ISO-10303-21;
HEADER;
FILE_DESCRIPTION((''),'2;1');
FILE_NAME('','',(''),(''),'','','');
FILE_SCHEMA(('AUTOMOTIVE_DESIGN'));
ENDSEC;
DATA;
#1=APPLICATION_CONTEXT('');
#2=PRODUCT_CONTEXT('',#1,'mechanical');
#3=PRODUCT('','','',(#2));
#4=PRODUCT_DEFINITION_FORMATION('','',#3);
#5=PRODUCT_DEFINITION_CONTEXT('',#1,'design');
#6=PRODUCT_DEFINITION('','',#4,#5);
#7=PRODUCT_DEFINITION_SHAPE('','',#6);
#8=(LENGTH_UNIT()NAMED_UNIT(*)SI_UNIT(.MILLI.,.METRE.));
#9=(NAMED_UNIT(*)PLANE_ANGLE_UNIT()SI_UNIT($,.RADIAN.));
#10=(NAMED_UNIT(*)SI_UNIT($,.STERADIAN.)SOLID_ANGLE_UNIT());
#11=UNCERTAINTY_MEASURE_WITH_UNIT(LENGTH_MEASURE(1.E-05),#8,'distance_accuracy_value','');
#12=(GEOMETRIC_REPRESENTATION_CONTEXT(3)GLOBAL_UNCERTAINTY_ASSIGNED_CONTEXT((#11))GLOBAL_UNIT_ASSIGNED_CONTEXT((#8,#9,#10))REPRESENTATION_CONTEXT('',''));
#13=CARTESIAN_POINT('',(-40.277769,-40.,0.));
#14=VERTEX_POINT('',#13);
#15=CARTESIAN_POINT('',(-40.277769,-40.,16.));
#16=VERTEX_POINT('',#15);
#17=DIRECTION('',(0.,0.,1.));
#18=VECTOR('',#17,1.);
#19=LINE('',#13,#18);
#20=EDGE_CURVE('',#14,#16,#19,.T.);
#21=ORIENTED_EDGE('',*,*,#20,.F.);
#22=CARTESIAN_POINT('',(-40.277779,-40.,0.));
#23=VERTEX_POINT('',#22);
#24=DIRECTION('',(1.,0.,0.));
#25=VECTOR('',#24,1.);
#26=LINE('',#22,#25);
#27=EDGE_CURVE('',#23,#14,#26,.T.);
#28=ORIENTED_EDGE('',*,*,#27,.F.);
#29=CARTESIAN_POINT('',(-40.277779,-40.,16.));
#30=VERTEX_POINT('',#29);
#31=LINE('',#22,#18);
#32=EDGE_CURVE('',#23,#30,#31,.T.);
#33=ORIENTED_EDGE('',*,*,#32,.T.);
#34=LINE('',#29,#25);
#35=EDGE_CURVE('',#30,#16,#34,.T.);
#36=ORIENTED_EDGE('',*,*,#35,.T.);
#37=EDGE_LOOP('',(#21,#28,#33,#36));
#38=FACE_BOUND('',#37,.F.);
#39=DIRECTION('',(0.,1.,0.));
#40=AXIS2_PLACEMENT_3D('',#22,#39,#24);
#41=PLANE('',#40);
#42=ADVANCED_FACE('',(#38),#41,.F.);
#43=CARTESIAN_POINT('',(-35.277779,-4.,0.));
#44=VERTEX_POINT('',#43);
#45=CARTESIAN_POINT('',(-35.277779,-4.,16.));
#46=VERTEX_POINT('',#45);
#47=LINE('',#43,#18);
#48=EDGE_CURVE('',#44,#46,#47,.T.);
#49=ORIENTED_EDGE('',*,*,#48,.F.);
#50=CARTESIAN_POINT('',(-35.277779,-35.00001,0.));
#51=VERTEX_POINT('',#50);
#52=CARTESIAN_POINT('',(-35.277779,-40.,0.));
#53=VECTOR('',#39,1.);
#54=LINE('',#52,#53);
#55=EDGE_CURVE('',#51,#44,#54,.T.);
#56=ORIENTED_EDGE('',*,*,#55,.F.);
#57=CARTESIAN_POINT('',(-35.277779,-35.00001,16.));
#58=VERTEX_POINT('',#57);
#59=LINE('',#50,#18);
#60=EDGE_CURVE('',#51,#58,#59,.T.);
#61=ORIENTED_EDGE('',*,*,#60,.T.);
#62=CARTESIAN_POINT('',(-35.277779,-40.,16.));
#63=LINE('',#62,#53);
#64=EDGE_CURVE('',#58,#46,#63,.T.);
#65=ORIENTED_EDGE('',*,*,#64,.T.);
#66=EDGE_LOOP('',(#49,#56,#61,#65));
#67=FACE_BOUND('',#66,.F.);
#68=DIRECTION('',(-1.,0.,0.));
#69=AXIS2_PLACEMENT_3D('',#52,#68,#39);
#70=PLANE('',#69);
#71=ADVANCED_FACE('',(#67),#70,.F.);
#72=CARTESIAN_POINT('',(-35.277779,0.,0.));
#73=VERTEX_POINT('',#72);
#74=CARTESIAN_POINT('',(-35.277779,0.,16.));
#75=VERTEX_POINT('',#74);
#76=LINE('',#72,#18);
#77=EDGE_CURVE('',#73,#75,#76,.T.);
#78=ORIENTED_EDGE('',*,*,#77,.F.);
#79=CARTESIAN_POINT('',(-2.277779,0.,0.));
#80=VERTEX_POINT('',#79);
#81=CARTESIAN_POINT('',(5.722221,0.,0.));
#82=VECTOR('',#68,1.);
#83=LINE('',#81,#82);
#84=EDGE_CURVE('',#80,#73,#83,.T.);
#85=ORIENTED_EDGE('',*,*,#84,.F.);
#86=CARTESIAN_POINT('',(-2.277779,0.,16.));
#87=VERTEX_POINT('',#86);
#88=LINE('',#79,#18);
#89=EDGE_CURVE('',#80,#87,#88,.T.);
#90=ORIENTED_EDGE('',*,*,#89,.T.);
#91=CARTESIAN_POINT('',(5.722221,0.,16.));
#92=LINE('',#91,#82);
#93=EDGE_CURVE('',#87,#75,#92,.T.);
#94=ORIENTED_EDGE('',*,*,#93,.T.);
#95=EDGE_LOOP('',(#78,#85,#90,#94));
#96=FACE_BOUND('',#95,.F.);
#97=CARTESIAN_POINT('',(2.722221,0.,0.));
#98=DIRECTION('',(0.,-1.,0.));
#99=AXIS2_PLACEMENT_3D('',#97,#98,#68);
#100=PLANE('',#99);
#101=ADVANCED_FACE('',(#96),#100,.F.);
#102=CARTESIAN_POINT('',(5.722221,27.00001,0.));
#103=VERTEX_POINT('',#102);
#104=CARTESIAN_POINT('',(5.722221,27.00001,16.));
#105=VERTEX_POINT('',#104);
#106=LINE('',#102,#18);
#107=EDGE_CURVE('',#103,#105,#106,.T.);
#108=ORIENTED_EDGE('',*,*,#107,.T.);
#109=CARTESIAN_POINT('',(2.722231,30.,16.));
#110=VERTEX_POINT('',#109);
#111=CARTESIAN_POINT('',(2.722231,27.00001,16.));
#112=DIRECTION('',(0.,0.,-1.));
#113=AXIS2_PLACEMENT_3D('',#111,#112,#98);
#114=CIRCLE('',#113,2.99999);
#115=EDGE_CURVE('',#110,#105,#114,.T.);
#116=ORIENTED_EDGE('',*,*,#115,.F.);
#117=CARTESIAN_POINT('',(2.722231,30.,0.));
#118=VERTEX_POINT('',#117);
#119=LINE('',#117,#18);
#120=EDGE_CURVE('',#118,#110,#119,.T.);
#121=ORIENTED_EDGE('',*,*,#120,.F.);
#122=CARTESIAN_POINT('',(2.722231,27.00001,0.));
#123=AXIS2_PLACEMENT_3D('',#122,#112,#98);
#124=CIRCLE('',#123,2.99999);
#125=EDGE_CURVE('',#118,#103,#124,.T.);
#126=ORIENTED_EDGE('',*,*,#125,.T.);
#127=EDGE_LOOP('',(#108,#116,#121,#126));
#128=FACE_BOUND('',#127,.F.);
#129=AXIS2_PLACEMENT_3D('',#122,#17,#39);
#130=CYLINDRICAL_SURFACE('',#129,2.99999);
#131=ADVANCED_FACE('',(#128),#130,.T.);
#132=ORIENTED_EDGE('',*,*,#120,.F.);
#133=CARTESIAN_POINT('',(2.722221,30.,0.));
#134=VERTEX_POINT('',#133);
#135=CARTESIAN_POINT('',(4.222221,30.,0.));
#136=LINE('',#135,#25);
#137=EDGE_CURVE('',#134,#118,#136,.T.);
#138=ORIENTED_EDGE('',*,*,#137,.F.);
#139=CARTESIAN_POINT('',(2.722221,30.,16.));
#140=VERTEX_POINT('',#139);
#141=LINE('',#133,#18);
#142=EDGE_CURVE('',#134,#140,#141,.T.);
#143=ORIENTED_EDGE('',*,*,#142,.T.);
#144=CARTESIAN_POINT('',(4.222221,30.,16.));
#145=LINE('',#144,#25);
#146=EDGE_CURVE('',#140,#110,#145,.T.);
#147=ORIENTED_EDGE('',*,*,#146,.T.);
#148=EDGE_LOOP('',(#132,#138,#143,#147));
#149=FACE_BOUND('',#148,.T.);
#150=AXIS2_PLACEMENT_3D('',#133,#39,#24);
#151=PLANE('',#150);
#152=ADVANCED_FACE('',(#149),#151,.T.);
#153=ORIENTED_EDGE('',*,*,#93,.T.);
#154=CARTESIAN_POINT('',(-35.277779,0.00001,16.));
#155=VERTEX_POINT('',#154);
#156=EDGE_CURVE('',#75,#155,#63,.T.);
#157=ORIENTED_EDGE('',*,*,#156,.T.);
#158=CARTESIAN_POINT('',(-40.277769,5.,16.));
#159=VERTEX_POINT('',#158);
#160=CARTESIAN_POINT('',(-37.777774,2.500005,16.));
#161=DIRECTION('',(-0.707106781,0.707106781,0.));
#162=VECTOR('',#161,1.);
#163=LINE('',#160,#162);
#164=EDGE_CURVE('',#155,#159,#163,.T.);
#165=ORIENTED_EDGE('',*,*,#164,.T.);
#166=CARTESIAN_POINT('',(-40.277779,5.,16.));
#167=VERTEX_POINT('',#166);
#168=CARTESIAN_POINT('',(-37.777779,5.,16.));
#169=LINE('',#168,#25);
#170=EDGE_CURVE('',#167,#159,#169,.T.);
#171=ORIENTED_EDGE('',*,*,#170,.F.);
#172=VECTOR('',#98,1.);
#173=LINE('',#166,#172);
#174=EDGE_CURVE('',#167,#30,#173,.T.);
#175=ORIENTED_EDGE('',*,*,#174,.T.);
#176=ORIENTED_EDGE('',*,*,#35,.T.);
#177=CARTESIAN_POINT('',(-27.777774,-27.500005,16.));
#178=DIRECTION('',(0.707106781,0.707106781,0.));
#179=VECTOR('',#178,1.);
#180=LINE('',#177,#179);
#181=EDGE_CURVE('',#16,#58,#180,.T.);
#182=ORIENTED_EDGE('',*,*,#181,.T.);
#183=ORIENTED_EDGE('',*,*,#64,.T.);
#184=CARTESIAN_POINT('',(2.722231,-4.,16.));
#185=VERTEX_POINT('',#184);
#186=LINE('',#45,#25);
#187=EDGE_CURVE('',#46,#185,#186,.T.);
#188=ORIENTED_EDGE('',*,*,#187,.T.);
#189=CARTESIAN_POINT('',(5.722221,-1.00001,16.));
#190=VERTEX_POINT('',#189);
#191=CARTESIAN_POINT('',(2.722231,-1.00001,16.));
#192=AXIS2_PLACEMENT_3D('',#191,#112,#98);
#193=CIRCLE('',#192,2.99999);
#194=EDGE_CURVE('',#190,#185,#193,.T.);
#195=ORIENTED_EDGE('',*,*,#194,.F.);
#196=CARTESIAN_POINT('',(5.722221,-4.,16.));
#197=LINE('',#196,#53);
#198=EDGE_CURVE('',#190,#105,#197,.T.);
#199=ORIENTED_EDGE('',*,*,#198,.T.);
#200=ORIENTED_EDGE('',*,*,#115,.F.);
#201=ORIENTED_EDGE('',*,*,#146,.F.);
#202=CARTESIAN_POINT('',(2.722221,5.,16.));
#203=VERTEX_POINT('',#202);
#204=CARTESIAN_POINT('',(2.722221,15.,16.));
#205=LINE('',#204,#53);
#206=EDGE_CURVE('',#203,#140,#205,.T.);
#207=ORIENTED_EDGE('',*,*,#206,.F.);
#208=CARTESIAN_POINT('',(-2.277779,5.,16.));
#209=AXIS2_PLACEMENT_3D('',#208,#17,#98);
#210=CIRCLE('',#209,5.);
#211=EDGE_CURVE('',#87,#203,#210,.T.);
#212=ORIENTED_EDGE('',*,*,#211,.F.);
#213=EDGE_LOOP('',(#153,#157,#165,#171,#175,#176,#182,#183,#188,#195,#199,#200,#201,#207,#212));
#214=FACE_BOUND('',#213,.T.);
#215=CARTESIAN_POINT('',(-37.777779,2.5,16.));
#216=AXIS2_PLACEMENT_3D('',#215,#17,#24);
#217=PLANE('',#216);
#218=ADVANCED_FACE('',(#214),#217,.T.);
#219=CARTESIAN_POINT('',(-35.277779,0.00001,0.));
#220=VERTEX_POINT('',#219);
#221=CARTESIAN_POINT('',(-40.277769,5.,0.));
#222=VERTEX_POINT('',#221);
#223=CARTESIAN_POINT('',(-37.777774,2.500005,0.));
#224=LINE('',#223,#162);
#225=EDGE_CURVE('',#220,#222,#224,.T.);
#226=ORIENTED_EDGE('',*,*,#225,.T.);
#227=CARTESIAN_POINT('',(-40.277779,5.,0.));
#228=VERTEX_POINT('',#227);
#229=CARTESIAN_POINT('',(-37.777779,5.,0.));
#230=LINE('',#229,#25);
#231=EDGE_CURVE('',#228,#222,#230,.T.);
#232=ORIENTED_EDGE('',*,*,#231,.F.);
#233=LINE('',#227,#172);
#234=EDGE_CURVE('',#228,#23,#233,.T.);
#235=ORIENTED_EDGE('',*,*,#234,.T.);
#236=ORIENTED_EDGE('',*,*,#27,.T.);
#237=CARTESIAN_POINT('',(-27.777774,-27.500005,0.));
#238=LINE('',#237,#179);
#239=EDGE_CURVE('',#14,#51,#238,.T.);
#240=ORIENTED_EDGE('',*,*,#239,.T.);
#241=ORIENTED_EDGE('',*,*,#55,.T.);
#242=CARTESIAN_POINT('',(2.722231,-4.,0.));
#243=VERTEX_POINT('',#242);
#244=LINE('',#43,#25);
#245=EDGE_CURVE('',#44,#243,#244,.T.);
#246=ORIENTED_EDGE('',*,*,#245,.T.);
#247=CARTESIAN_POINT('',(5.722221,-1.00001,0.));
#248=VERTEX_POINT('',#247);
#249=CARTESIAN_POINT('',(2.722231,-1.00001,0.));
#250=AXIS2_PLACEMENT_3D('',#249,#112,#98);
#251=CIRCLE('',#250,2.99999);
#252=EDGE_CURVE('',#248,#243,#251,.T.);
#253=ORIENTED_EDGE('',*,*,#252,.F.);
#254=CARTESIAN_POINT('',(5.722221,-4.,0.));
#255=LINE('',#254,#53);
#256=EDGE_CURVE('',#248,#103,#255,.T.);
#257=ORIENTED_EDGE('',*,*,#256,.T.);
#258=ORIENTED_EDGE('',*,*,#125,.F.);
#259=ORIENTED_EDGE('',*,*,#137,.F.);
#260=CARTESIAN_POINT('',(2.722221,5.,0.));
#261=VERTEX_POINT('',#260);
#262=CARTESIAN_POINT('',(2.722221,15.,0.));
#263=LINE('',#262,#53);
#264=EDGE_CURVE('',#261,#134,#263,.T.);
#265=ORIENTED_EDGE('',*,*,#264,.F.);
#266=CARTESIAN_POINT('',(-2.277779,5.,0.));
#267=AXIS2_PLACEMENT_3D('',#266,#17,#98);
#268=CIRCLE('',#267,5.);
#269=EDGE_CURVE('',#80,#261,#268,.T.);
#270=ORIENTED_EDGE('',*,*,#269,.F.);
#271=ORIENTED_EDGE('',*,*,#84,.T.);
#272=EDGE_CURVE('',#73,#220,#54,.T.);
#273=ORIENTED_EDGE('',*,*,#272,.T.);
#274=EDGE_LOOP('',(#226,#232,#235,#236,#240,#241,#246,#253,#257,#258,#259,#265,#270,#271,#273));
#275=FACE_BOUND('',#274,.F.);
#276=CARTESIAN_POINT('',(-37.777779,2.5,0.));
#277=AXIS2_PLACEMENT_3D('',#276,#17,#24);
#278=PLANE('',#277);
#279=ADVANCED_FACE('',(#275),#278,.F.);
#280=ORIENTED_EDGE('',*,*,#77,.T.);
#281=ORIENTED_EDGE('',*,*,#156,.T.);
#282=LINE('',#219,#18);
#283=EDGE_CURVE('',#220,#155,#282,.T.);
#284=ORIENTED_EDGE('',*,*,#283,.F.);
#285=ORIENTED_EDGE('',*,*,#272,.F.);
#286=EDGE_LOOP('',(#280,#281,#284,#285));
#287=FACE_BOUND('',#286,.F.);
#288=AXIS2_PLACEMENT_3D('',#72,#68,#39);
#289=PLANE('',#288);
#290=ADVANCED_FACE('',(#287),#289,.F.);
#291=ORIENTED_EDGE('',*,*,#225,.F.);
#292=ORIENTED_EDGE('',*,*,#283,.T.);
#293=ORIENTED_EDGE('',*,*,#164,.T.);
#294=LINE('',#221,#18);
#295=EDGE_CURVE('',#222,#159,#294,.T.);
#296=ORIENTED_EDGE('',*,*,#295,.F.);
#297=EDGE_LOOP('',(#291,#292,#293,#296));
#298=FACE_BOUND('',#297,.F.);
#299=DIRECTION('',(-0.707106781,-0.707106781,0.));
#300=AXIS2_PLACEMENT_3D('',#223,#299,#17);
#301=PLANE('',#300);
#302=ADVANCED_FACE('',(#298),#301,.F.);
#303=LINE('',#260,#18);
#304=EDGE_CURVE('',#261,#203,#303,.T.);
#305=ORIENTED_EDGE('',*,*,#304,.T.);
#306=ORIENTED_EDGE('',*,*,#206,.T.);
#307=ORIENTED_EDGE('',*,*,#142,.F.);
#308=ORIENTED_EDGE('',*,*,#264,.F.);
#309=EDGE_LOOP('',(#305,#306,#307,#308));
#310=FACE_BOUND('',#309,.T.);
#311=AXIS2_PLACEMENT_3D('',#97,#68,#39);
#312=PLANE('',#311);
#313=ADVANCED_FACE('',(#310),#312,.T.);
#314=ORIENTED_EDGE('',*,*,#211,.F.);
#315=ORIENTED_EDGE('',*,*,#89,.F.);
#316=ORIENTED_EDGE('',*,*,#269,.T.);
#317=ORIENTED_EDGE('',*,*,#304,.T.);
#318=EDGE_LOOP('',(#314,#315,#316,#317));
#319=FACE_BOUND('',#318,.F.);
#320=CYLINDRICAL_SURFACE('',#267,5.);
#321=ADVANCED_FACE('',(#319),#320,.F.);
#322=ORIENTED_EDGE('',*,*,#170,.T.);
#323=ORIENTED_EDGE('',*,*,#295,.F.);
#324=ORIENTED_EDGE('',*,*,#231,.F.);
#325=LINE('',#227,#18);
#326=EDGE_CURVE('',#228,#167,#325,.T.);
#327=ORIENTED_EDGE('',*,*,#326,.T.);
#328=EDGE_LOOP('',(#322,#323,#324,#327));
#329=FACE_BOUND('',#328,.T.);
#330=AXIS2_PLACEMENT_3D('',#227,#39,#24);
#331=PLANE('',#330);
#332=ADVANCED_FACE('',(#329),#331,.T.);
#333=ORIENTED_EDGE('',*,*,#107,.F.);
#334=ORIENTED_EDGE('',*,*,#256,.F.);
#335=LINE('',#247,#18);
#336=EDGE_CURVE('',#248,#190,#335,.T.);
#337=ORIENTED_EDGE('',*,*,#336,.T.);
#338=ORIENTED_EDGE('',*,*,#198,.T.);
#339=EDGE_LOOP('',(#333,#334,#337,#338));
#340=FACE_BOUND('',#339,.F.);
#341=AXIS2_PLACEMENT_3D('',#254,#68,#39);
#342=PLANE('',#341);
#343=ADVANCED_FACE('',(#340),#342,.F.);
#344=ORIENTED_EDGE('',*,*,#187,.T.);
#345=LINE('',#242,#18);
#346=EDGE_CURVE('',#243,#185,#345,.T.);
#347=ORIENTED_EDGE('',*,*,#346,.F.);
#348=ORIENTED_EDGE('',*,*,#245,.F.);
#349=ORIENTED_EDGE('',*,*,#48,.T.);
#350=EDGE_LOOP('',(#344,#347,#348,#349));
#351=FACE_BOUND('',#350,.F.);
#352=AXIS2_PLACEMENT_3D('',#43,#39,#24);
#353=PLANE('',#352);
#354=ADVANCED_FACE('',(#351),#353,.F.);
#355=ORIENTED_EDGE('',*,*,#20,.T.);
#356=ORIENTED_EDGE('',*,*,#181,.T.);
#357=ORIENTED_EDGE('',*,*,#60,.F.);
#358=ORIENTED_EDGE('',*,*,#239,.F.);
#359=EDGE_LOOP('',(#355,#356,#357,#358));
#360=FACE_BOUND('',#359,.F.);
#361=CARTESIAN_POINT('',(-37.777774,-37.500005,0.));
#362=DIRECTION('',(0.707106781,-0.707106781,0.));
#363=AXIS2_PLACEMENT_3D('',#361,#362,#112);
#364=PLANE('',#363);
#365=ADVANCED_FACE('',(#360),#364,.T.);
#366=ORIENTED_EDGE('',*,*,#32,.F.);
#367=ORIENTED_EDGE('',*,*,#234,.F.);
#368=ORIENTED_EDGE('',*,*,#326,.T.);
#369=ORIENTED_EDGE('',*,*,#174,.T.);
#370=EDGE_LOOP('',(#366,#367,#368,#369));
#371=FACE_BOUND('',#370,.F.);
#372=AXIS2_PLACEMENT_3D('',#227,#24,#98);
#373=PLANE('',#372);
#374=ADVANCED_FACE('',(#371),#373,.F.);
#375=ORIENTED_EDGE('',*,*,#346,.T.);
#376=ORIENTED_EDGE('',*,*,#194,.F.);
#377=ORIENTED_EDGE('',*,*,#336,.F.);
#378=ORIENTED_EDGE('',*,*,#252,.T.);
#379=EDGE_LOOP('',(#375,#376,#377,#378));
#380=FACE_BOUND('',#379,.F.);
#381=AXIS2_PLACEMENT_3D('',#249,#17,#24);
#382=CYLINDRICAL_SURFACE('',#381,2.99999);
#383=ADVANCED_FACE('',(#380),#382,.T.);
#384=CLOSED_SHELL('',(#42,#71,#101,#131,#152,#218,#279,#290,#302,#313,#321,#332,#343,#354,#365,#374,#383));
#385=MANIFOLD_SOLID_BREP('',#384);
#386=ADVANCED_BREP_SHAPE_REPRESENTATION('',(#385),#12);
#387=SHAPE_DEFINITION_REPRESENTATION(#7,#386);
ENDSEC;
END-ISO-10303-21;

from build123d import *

# Parameters (mm, degrees)
F0_W     = 5
F0_H     = 5
F0_W_2   = 3
F0_H_2   = 30
F1_DEPTH = 16
F2_SIZE  = 4.99999
F3_SIZE  = 4.99999
F4_R     = 5
F5_R     = 2.99999


# Not quite as in the source:
# - a fillet or chamfer is up to 0.001 mm smaller than in the source, because OpenCascade refuses the exact size


with BuildPart() as f1:
    # F0 (on Top) → F1 (new body)
    with BuildSketch(Plane.XY):
        with Locations((-37.7777791023, 2.5)):
            Rectangle(F0_W, F0_H)
        Polygon((-35.2777791023, -4), (-35.2777791023, 0), (-40.2777791023, 0), (-40.2777791023, -40), (-35.2777791023, -40), align=None)
        Polygon((2.7222208977, 0), (-35.2777791023, 0), (-35.2777791023, -4), (5.7222208977, -4), (5.7222208977, 0), align=None)
        with Locations((4.2222208977, 15)):
            Rectangle(F0_W_2, F0_H_2)
    extrude(amount=F1_DEPTH)

    # F2 (size 5 in the source; OpenCascade refuses exactly that, so slightly less here)
    f2_edges = [f1.edges().sort_by_distance(p)[0] for p in [
        (-35.277779, 5, 8),
    ]]
    chamfer(f2_edges, length=F2_SIZE)

    # F3 (size 5 in the source; OpenCascade refuses exactly that, so slightly less here)
    f3_edges = [f1.edges().sort_by_distance(p)[0] for p in [
        (-35.277779, -40, 8),
    ]]
    chamfer(f3_edges, length=F3_SIZE)

    # F4
    f4_edges = [f1.edges().sort_by_distance(p)[0] for p in [
        (2.722221, 0, 8),
    ]]
    fillet(f4_edges, radius=F4_R)

    # F5 (radius 3 in the source; OpenCascade refuses exactly that, so slightly less here)
    f5_edges = [f1.edges().sort_by_distance(p)[0] for p in [
        (5.722221, -4, 8),
        (5.722221, 30, 8),
    ]]
    fillet(f5_edges, radius=F5_R)


solid = f1.part
